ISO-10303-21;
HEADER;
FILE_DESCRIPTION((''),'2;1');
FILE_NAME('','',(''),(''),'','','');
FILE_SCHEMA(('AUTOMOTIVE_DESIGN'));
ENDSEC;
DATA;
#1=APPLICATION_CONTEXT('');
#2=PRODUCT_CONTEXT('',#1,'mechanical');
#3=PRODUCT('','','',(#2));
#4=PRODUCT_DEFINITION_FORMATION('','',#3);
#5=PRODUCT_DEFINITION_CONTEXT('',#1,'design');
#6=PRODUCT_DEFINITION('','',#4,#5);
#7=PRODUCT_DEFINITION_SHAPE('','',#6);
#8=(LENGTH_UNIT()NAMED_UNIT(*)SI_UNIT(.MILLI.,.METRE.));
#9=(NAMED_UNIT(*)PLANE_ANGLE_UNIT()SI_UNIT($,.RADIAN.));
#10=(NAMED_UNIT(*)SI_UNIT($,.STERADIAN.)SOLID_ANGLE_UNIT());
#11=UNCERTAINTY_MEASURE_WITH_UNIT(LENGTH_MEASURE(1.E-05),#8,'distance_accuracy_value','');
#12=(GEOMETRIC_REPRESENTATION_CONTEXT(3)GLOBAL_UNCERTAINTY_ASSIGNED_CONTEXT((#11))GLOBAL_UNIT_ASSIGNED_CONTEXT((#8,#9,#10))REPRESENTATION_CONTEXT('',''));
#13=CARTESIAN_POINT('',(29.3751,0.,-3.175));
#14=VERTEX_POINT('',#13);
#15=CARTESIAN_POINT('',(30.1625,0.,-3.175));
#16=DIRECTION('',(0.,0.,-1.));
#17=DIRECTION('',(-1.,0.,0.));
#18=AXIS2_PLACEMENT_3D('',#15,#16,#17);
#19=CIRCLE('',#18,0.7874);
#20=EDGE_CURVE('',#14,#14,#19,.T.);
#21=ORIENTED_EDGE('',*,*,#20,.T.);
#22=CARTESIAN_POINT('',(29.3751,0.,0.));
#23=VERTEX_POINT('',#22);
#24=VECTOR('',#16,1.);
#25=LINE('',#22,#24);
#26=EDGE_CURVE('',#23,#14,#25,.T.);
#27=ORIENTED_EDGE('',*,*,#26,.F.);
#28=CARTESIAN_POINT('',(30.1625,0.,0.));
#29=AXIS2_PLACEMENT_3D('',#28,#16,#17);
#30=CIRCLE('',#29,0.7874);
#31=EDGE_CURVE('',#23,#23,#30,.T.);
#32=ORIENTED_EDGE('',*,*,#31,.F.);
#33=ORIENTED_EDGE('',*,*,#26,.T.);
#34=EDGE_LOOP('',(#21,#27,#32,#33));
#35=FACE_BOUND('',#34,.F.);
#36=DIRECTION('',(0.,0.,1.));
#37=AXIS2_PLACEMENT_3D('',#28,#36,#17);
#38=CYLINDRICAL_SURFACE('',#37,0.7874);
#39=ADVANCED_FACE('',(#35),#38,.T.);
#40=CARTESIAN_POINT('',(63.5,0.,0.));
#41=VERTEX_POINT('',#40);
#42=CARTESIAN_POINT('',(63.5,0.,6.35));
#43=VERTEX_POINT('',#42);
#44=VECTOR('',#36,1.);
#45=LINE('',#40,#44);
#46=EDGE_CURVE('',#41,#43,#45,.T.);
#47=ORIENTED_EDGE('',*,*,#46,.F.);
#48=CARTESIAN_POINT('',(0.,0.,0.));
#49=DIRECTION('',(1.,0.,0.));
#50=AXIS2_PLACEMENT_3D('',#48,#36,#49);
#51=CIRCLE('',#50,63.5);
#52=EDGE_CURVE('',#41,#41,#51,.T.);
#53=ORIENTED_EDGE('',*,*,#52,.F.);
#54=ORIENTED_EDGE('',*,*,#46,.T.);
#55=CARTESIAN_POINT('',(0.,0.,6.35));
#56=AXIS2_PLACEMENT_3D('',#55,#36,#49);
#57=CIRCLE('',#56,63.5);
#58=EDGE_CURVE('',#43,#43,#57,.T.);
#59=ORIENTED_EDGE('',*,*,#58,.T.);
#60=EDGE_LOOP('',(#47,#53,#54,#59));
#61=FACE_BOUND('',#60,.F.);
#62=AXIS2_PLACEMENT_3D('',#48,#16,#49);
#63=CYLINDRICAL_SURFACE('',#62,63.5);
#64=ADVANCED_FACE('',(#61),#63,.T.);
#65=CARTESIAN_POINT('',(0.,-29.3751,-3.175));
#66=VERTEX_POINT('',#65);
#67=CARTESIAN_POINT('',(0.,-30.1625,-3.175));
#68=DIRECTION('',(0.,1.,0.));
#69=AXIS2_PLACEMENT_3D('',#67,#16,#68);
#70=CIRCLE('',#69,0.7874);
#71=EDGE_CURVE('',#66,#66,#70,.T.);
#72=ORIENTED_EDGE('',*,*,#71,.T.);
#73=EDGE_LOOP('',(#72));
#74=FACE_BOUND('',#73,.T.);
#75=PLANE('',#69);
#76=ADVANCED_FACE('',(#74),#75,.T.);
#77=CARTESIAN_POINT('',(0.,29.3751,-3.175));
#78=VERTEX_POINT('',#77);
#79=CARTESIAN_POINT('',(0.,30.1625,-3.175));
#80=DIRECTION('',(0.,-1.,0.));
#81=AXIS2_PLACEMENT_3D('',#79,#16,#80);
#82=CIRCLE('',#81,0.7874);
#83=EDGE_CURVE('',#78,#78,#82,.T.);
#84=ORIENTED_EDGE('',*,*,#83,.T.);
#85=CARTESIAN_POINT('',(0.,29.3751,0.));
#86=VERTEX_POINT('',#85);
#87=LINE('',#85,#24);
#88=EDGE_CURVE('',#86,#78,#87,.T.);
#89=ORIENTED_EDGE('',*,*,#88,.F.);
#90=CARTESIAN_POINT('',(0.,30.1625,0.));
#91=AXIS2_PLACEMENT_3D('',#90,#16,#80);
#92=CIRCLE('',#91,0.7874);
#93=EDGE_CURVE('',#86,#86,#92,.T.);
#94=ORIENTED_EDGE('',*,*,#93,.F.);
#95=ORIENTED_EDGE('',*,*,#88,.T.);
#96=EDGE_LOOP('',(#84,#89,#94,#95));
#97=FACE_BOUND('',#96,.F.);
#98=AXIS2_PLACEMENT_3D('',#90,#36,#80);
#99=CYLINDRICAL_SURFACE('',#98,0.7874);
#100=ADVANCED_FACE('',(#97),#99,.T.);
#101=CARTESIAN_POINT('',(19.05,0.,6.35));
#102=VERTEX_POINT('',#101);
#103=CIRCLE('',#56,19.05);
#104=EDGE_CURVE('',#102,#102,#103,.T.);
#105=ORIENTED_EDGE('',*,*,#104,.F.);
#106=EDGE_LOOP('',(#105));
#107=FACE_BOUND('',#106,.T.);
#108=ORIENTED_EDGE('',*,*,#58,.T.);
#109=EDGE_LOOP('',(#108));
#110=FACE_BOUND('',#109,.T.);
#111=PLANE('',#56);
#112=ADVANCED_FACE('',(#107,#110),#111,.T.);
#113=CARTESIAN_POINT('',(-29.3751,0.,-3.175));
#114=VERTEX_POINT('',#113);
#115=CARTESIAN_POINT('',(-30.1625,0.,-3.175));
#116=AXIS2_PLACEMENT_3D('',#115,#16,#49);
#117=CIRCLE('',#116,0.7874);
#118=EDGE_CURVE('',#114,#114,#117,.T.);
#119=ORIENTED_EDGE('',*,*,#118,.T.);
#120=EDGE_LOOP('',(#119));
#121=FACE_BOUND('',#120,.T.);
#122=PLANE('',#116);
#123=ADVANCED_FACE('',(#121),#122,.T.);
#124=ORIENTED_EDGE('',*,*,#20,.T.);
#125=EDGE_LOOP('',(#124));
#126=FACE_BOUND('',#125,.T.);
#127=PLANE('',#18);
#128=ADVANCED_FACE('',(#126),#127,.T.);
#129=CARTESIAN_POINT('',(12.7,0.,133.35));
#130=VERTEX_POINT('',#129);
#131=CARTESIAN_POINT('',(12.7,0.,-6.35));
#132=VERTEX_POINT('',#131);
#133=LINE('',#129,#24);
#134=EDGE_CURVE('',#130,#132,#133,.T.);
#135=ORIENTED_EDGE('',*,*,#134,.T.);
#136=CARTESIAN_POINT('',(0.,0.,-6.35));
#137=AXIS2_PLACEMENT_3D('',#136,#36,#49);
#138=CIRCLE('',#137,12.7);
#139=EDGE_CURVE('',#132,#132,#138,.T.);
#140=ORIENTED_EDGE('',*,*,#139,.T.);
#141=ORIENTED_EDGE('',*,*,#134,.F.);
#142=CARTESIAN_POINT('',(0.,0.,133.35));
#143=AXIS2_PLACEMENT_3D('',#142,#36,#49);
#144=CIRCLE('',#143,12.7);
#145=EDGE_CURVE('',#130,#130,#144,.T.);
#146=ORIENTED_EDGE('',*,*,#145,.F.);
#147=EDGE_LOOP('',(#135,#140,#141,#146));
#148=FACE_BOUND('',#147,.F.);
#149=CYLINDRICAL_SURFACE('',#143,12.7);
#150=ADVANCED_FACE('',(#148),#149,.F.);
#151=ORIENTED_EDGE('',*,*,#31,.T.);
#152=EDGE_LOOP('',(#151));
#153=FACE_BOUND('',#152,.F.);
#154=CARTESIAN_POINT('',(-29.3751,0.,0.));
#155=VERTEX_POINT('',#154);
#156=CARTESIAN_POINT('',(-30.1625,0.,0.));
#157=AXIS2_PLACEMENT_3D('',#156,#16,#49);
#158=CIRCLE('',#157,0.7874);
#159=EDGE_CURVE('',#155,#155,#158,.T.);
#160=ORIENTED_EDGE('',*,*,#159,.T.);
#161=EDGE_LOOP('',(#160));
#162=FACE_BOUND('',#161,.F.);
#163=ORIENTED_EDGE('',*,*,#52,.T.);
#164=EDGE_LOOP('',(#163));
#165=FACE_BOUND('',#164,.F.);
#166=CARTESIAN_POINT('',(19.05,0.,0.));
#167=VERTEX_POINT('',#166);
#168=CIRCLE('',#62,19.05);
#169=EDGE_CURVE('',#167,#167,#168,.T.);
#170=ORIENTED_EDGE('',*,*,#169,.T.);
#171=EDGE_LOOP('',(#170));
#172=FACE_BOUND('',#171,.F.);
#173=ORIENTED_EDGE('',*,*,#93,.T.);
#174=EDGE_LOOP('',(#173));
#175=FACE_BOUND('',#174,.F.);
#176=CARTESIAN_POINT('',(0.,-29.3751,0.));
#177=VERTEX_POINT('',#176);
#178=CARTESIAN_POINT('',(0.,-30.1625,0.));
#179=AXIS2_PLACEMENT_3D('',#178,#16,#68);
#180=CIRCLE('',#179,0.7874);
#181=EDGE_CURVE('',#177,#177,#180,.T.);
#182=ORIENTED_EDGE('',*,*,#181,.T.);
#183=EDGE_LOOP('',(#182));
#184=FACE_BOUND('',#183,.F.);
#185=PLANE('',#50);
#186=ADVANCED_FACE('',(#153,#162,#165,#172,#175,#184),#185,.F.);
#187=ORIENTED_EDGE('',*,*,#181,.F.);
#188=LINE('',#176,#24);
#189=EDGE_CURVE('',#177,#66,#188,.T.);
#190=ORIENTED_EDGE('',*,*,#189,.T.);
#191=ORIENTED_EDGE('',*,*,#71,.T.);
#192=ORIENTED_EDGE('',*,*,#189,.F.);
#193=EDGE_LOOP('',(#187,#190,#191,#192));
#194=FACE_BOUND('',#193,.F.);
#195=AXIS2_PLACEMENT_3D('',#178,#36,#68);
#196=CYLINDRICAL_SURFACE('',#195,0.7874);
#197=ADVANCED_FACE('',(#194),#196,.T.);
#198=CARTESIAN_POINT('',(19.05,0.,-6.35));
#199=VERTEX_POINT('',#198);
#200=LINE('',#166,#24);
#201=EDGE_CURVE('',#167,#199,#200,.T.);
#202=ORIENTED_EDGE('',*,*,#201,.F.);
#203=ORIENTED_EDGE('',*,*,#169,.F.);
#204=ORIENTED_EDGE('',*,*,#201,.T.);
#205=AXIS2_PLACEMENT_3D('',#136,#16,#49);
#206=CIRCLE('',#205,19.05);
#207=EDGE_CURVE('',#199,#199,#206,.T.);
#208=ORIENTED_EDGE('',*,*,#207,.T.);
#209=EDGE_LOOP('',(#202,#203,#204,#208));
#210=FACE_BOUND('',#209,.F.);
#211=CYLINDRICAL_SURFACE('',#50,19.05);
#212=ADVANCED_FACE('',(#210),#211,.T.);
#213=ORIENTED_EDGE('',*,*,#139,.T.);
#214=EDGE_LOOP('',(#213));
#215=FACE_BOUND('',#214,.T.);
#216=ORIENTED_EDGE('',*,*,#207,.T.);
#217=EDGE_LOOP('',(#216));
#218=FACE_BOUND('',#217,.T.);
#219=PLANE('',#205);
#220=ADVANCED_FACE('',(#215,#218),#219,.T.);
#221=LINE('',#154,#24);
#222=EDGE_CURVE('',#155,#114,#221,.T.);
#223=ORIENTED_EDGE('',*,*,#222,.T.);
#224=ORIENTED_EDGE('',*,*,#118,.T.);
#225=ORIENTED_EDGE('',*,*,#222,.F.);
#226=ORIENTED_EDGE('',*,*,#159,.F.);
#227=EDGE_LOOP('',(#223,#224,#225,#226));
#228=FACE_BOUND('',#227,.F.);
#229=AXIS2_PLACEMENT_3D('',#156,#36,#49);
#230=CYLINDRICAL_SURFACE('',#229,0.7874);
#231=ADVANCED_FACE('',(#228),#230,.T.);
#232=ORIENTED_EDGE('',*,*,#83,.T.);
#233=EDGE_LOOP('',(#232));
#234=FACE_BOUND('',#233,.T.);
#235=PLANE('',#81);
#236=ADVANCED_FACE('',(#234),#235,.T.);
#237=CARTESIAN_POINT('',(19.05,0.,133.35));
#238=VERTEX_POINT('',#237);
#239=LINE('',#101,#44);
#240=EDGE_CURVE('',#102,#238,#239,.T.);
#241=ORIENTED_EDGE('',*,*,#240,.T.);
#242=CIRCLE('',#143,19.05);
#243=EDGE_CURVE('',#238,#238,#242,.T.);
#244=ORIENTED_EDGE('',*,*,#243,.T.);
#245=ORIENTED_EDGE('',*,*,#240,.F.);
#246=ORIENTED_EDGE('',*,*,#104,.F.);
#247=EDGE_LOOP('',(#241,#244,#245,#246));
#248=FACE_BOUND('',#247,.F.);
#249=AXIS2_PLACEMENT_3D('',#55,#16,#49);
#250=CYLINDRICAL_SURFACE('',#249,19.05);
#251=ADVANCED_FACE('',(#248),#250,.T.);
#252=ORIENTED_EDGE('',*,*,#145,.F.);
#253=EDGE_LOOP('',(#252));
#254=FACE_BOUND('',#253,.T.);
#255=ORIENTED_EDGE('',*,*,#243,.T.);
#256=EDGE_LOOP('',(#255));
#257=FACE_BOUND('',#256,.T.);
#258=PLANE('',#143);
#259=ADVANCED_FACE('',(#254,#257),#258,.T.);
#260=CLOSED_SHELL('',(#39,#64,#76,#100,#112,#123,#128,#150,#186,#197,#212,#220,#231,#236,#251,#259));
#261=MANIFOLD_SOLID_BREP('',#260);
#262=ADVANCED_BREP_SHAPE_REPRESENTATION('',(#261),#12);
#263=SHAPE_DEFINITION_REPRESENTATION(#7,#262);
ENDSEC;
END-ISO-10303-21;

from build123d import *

# Parameters (mm, degrees)
F0_R            = 63.5
F1_DEPTH        = 6.35
F2_R            = 0.7874
F3_DEPTH        = 3.175
F3_COPIES_COUNT = 4
F4_R            = 19.05
F5_DEPTH        = 6.35
F6_R            = 19.05
F7_DEPTH        = 127
F8_R            = 12.7
F9_DEPTH        = 139.701


# Not quite as in the source:
# - a pattern or mirror of a feature is missing from the dataset's text; its kind, count and spacing are read off the source's solid


with BuildPart() as f1:
    # F0 (on Top) → F1 (new body)
    with BuildSketch(Plane.XY):
        Circle(F0_R)
    extrude(amount=F1_DEPTH)

    # F2 (on face) → F3 (join)
    with BuildSketch(Plane(origin=(0, 0, 0), x_dir=(1, 0, 0), z_dir=(0, 0, -1))):
        with Locations((-30.1625, 0)):
            Circle(F2_R)
    f3 = extrude(amount=F3_DEPTH)

    # F3_copies: F3 ×4 about axis
    f3_copies_axis = Axis((0, 0, 0), (0, 0, 1))
    for i in range(1, F3_COPIES_COUNT):
        add(f3.rotate(f3_copies_axis, i * 360 / F3_COPIES_COUNT))

    # F4 (on face) → F5 (join)
    with BuildSketch(Plane(origin=(0, 0, 0), x_dir=(1, 0, 0), z_dir=(0, 0, -1))):
        Circle(F4_R)
    extrude(amount=F5_DEPTH)

    # F6 (on face) → F7 (join)
    with BuildSketch(Plane.XY.offset(6.35)):
        Circle(F6_R)
    extrude(amount=F7_DEPTH)

    # F8 (on face) → F9 (cut, through all)
    with BuildSketch(Plane.XY.offset(133.35)):
        Circle(F8_R)
    extrude(amount=-F9_DEPTH, mode=Mode.SUBTRACT)


solid = f1.part
